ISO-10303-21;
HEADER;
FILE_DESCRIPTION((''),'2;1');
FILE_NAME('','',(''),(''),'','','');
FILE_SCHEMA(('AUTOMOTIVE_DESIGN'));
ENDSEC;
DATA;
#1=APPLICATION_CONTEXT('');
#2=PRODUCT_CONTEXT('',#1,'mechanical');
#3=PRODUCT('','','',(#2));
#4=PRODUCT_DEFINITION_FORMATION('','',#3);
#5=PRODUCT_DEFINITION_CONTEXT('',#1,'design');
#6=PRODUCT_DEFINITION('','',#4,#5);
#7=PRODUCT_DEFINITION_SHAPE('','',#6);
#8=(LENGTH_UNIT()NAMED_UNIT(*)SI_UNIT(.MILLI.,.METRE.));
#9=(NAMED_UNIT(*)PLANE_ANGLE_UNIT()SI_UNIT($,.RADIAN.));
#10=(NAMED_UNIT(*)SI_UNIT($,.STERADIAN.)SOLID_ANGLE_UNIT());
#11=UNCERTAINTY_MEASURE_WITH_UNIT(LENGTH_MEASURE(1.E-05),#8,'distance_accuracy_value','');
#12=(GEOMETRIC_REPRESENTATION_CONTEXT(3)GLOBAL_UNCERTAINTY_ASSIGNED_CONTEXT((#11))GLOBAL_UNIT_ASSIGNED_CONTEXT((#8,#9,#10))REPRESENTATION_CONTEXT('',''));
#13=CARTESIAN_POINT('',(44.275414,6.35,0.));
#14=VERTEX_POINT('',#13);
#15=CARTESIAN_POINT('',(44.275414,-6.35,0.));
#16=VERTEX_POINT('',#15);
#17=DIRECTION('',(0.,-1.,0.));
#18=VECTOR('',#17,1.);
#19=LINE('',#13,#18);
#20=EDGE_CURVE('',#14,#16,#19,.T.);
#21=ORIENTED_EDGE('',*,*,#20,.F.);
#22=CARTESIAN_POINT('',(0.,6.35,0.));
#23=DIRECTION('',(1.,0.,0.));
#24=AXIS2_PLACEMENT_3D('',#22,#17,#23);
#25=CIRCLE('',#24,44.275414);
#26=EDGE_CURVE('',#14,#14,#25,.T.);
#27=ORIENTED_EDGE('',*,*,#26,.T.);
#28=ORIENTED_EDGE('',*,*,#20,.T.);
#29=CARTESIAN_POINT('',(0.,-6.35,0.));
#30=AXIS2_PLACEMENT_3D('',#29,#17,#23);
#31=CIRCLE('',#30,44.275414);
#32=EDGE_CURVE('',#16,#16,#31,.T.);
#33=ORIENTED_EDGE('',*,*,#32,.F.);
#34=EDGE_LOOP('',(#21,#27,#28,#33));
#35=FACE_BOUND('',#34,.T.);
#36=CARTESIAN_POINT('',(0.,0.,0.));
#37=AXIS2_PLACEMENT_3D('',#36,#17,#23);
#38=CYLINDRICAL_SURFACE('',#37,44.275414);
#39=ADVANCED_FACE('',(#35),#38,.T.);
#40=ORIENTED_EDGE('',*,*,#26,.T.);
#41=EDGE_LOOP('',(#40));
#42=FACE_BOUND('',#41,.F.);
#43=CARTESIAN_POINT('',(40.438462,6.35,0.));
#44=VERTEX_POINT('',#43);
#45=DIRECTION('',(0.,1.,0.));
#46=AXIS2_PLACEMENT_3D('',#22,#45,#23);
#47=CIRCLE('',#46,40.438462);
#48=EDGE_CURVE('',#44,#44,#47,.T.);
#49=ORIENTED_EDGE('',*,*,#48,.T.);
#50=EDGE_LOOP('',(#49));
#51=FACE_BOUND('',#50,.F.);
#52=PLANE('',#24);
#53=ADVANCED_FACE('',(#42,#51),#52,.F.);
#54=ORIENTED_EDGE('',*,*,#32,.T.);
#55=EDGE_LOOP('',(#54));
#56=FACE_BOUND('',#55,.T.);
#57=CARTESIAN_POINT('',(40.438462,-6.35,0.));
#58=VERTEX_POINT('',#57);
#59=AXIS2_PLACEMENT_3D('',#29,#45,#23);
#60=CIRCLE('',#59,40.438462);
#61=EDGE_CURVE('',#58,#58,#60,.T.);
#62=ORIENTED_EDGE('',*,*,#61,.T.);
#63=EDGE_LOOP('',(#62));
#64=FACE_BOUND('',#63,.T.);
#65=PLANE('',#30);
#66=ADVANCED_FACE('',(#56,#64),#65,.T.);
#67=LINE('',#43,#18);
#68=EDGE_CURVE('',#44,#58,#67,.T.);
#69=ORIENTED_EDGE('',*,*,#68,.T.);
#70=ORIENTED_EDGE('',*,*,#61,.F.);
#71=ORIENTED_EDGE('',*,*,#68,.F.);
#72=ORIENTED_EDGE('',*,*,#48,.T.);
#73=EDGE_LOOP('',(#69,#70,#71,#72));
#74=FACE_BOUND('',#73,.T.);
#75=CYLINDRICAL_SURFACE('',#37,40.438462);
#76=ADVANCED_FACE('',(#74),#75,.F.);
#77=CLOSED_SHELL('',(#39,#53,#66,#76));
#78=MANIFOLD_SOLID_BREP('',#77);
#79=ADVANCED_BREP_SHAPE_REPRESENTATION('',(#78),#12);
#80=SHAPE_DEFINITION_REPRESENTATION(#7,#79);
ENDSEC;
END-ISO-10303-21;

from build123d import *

# Parameters (mm, degrees)
F0_R     = 44.275413932
F1_DEPTH = 6.35


# Not quite as in the source:
# - the program builds the solid bodies; features that only make, move or delete a surface that nothing else refers to are left out


with BuildPart() as f1:
    # F0 (on Front) → F1 (new body, symmetric)
    with BuildSketch(Plane.XZ):
        Circle(F0_R)
        with BuildLine():
            ThreePointArc((-40.4384616778, 0), (0, 40.4384616778), (40.4384616778, 0))
            ThreePointArc((40.4384616778, 0), (0, -40.4384616778), (-40.4384616778, 0))
        make_face(mode=Mode.SUBTRACT)
    extrude(amount=F1_DEPTH, both=True)


solid = f1.part
